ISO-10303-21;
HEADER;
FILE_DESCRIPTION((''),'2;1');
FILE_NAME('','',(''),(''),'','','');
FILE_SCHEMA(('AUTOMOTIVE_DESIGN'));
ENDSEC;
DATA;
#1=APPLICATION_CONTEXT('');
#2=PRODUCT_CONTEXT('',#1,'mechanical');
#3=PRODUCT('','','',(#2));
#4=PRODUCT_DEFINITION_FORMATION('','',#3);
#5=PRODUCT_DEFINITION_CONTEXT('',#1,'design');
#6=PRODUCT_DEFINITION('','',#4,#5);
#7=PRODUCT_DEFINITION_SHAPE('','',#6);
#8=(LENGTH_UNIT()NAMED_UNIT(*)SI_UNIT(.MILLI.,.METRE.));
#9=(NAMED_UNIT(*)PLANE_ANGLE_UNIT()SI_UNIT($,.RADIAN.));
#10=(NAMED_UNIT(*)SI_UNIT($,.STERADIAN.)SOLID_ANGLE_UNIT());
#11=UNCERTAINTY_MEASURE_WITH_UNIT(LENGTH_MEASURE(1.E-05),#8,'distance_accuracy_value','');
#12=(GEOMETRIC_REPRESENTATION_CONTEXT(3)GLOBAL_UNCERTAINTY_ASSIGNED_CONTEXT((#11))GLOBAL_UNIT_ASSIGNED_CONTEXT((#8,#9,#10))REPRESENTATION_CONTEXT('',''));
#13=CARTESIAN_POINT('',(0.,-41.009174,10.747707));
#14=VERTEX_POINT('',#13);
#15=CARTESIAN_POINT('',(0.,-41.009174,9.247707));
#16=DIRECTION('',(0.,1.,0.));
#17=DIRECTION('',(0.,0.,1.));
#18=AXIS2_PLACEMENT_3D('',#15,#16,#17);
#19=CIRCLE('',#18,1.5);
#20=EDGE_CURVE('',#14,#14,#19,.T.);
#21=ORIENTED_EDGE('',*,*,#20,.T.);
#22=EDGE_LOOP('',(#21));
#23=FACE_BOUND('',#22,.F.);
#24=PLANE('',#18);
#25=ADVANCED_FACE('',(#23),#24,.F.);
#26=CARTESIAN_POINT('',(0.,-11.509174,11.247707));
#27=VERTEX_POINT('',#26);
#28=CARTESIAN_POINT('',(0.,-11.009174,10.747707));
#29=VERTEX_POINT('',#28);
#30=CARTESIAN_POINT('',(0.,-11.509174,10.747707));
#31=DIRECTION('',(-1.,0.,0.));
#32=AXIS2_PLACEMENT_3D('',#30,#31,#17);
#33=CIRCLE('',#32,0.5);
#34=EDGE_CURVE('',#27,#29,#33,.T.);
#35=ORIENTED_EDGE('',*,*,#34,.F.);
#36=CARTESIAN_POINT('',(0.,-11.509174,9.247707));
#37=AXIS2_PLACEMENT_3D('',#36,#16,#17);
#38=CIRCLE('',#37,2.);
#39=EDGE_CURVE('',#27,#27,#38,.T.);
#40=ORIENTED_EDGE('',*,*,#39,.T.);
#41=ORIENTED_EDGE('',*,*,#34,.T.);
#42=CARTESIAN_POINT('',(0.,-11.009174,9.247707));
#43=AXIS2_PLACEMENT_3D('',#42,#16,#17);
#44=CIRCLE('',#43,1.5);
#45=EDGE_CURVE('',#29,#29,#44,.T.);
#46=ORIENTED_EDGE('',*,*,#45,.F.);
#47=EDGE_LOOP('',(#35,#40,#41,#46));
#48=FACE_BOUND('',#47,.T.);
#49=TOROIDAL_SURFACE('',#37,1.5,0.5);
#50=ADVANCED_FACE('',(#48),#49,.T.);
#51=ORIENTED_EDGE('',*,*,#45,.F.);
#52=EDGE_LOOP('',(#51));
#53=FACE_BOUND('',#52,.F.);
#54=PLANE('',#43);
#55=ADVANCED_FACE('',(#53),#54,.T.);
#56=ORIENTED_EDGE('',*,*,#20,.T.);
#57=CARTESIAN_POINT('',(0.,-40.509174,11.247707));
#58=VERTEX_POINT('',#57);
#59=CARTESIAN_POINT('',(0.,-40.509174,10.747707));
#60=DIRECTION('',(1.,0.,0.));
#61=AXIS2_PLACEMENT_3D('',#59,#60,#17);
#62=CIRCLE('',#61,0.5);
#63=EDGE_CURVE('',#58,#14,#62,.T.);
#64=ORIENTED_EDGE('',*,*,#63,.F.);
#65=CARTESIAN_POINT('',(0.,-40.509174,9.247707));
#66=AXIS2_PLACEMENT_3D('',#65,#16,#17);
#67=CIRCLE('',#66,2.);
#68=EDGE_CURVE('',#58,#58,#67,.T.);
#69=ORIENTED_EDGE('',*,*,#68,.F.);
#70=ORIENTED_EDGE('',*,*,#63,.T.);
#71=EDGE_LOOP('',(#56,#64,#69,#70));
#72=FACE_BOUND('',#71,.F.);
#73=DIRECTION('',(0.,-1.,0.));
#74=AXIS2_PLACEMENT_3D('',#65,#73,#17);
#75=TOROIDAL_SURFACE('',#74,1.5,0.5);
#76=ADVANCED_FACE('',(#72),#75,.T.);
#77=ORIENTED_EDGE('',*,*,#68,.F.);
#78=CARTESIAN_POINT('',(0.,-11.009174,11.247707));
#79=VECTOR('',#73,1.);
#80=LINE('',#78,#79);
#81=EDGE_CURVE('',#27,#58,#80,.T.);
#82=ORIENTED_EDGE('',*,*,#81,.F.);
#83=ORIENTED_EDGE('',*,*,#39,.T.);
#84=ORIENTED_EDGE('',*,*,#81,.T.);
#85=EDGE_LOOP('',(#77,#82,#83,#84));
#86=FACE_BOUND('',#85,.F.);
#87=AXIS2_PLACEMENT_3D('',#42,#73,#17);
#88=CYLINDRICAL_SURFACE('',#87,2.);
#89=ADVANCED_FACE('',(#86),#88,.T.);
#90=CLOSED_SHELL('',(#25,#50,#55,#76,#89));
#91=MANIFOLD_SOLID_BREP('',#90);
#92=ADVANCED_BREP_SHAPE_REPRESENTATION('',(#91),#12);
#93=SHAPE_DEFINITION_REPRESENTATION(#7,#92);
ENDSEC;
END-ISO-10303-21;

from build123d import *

# Parameters (mm, degrees)
F2_R = 0.5


with BuildPart() as f1:
    # F0 (on Right) → F1 (revolve)
    with BuildSketch(Plane.YZ):
        Polygon((-11.0091740638, 11.247707203), (-15.0091740638, 11.247707203), (-22.9062791914, 11.247707203), (-23.5091740638, 11.247707203), (-28.5091740638, 11.247707203), (-28.8583226502, 11.247707203), (-29.1120689362, 11.247707203), (-37.0091740638, 11.247707203), (-41.0091740638, 11.247707203), (-41.0091740638, 9.247707203), (-26.0091740638, 9.247707203), (-11.0091740638, 9.247707203), align=None)
    revolve(axis=Axis((0, -26.3120413944, 9.247707203), (0, 1, 0)))

    # F2
    f2_edges = [f1.edges().sort_by_distance(p)[0] for p in [
        (0, -41.009174, 7.247707),
        (0, -11.009174, 7.247707),
    ]]
    fillet(f2_edges, radius=F2_R)


solid = f1.part
